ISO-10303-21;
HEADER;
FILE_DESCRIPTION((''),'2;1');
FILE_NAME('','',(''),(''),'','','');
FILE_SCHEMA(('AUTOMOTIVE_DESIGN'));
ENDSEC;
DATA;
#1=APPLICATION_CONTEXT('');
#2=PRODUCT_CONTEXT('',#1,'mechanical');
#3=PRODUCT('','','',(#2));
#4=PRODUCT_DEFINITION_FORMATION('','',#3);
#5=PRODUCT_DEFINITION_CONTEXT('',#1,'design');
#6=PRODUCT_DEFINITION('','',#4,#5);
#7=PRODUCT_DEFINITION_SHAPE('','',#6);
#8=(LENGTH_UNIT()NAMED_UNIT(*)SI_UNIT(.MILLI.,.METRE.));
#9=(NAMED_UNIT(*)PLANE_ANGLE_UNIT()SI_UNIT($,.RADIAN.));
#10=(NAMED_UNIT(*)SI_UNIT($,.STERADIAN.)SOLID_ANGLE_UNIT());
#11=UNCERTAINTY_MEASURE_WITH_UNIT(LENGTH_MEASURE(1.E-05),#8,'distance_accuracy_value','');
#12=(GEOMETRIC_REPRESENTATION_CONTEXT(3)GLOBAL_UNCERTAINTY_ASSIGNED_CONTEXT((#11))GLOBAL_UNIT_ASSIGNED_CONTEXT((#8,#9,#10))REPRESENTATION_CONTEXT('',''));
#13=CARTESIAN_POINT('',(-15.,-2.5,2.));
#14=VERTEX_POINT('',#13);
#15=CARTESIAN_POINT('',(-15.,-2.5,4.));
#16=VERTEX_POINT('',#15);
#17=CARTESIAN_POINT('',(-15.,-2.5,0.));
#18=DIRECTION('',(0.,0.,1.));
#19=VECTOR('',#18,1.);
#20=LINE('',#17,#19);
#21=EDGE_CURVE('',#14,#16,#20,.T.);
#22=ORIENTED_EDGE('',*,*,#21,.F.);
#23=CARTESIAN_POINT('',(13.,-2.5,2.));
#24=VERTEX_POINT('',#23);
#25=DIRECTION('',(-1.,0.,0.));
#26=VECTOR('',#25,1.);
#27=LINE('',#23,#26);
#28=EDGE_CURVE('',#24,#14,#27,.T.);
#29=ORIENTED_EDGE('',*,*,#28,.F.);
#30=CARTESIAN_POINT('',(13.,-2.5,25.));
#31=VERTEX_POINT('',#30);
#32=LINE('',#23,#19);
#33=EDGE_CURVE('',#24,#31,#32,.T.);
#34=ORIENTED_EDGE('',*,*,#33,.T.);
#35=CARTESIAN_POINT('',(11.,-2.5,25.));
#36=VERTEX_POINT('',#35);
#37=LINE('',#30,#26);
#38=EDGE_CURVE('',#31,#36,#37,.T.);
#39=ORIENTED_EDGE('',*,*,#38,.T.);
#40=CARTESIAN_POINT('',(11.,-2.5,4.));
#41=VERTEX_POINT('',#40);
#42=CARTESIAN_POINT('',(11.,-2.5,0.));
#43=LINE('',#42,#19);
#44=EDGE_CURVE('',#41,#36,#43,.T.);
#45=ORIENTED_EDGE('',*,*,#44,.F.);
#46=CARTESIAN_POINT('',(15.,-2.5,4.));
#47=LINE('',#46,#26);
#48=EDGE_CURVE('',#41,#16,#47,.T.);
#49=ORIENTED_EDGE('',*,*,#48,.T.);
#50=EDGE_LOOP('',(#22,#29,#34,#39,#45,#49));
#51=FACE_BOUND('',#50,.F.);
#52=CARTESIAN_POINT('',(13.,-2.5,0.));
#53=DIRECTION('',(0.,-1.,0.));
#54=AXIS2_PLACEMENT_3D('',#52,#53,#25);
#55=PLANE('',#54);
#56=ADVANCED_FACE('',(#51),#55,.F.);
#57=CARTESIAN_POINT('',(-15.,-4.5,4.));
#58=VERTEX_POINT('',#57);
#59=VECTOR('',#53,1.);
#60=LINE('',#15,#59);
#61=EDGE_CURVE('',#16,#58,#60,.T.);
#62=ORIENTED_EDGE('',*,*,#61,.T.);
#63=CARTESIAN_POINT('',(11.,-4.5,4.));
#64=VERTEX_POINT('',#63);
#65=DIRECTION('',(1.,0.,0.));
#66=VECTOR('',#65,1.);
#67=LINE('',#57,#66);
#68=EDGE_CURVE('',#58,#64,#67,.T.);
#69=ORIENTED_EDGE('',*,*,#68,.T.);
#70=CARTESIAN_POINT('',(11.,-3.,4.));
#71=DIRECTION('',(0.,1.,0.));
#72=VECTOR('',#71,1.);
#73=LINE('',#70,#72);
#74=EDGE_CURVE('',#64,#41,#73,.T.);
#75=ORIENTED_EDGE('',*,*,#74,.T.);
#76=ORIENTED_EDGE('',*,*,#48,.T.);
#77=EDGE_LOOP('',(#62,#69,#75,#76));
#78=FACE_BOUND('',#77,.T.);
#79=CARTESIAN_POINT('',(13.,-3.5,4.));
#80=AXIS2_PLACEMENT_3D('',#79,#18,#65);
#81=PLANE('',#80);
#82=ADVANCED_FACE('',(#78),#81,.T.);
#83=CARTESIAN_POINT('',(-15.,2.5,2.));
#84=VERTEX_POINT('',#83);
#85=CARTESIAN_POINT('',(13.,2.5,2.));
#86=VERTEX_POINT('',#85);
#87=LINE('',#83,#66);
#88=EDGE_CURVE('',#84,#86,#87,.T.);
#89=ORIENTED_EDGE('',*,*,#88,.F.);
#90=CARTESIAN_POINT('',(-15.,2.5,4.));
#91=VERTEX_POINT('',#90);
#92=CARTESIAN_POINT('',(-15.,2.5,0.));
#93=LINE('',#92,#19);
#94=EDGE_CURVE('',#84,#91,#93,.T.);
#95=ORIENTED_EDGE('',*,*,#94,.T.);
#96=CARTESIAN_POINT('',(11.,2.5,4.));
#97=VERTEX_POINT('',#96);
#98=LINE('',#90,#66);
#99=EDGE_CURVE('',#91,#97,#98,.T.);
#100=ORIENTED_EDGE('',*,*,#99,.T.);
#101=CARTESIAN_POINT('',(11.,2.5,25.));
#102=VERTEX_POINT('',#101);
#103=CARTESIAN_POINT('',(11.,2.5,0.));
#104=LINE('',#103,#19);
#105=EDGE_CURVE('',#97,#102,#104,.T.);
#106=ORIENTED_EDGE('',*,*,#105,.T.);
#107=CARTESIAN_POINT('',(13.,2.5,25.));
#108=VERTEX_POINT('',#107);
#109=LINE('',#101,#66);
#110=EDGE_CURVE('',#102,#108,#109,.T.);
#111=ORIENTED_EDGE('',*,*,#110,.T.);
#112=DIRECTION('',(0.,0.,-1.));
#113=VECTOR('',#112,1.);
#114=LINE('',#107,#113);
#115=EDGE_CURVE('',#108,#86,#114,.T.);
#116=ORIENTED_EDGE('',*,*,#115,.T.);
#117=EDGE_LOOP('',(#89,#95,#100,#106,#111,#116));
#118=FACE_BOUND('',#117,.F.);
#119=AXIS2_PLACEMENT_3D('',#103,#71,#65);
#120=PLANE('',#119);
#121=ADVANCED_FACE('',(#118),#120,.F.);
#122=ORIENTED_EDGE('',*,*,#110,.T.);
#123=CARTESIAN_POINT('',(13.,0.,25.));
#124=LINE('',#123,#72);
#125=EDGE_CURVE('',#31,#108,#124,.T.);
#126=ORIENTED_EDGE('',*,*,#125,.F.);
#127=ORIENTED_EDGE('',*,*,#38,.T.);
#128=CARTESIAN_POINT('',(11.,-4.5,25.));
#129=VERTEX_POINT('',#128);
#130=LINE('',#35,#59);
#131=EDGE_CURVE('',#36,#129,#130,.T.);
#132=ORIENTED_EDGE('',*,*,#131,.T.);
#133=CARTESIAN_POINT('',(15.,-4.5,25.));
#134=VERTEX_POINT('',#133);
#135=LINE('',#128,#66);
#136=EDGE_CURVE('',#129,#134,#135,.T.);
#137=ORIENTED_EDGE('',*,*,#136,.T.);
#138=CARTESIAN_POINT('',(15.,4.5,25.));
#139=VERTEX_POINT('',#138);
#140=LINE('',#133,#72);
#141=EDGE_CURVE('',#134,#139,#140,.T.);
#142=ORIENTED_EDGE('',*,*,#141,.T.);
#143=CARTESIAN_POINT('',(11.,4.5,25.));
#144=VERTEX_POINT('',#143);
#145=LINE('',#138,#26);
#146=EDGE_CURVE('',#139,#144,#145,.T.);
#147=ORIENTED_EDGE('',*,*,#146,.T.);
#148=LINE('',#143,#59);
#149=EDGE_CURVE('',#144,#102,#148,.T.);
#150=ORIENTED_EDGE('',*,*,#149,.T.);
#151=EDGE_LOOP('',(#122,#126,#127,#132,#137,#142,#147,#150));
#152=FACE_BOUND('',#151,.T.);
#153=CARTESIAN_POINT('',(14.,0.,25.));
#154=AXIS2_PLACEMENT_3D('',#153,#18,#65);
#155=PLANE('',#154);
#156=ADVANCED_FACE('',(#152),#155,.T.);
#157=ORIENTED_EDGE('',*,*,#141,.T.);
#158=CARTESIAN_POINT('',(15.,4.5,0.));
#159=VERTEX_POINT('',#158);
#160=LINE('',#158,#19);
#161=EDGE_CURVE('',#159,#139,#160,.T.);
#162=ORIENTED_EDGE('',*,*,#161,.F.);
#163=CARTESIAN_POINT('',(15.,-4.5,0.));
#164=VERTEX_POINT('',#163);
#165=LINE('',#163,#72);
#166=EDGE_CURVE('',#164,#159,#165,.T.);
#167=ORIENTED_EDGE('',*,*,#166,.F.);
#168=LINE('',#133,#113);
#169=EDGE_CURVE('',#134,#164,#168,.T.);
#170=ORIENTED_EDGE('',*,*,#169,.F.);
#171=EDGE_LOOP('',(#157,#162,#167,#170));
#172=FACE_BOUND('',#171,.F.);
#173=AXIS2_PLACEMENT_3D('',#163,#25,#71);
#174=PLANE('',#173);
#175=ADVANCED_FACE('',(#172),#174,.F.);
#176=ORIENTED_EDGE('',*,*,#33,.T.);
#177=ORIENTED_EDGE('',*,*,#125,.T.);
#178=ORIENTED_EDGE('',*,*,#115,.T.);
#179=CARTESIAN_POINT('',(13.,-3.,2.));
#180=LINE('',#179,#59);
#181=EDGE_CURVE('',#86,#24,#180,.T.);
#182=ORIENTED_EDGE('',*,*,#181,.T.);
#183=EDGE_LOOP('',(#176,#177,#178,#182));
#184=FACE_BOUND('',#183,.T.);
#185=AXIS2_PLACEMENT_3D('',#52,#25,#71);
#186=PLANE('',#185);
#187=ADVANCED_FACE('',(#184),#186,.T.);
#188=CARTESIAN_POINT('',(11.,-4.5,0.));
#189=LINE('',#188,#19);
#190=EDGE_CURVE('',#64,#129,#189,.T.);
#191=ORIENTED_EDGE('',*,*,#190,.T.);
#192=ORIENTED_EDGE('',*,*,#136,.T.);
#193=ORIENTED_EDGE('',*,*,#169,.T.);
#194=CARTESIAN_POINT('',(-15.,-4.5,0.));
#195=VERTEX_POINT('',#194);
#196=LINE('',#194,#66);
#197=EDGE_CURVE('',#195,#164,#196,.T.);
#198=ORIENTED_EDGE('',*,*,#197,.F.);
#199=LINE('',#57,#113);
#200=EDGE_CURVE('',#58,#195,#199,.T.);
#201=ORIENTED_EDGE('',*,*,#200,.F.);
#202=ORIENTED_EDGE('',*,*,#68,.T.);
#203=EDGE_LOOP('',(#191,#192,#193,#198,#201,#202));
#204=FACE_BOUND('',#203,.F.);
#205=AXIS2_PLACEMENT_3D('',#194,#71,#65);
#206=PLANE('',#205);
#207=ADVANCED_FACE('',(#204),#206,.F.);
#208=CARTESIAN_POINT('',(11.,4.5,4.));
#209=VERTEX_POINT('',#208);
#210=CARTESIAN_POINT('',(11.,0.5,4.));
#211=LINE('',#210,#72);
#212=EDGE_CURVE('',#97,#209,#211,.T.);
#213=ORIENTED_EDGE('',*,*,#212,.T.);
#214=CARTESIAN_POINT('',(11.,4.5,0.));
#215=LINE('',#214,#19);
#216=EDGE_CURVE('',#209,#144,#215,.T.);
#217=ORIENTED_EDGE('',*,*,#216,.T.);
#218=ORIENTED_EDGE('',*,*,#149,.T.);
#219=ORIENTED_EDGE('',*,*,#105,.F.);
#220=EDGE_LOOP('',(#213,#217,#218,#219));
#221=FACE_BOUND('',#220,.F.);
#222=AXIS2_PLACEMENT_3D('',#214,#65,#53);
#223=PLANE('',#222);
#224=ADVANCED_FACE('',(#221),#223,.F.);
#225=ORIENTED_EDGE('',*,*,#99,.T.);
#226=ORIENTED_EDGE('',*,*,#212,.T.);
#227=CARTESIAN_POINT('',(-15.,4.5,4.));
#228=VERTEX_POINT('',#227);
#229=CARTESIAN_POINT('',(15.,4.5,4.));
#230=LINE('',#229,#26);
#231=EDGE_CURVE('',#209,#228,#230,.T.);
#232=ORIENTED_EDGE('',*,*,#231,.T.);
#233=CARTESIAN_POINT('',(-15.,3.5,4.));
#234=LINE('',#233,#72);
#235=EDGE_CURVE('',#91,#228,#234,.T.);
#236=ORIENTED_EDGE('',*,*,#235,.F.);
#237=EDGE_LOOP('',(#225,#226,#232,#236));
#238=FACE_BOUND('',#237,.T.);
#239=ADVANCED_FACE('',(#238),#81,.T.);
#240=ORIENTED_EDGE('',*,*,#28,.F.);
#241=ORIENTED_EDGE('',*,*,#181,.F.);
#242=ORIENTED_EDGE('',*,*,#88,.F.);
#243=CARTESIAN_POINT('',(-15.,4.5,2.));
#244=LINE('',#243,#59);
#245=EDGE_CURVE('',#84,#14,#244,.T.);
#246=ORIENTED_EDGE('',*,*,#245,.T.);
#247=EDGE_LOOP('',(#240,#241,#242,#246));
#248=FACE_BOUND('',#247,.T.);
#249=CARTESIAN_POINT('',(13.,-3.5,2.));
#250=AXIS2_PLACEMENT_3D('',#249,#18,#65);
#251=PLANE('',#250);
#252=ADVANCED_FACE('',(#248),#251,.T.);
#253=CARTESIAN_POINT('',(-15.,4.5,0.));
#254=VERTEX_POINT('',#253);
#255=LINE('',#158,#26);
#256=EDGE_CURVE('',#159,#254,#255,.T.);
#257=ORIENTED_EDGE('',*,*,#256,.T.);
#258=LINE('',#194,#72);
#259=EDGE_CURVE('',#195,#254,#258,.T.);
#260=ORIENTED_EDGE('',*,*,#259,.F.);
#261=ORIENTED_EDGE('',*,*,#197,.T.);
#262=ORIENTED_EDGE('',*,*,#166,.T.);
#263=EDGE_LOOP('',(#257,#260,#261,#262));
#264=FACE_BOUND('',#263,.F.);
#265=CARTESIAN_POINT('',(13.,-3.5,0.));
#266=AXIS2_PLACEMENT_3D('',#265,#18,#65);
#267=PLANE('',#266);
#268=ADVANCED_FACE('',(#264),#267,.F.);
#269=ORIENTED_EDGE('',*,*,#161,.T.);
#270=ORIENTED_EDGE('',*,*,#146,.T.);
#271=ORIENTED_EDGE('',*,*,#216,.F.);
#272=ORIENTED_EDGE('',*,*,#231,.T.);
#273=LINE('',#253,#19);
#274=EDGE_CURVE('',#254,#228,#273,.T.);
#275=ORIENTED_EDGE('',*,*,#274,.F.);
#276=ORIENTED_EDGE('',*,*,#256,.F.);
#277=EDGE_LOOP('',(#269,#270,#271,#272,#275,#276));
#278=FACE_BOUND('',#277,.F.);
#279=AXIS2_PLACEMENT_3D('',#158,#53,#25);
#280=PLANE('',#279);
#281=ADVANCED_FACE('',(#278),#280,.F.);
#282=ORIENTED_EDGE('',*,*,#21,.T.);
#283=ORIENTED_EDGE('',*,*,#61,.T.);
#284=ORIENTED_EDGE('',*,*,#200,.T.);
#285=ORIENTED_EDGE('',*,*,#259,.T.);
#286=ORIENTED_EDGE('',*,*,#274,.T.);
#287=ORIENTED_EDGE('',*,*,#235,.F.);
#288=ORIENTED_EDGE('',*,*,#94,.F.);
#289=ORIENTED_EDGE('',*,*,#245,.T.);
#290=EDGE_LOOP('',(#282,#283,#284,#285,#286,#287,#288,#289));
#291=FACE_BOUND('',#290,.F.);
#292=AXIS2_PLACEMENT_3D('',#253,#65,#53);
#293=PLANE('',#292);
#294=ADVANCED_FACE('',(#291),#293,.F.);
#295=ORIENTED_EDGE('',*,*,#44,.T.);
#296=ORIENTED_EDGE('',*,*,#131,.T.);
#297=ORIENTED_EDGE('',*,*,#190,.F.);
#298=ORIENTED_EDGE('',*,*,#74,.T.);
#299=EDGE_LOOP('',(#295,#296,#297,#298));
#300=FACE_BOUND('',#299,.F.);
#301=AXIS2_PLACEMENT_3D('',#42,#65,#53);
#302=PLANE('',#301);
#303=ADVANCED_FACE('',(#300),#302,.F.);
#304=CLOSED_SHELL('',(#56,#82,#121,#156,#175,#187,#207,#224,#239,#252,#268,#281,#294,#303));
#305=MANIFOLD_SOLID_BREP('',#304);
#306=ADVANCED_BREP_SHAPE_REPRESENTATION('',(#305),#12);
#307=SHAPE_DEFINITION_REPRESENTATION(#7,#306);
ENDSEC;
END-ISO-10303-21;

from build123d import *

# Parameters (mm, degrees)
F0_W     = 2
F0_H     = 5
F0_W_2   = 26
F0_H_2   = 2
F1_DEPTH = 2
F2_DEPTH = 4
F3_DEPTH = 25


with BuildPart() as f1:
    # F0 (on Top) → F1 (new body)
    with BuildSketch(Plane.XY):
        Polygon((11, -4.5), (15, -4.5), (15, -2.5), (13, -2.5), (11, -2.5), align=None)
        Polygon((-15, -4.5), (11, -4.5), (11, -2.5), (-13.6096680164, -2.5), (-15, -2.5), align=None)
        with Locations((14, 0)):
            Rectangle(F0_W, F0_H)
        with Locations((12, 0)):
            Rectangle(F0_W, F0_H)
        Polygon((-13.6096680164, -2.5), (11, -2.5), (11, 2.5), (-15, 2.5), (-15, -2.5), align=None)
        Polygon((13, 2.5), (15, 2.5), (15, 4.5), (11, 4.5), (11, 2.5), align=None)
        with Locations((-2, 3.5)):
            Rectangle(F0_W_2, F0_H_2)
    extrude(amount=F1_DEPTH)

    # F0 (on Top) → F2 (join)
    with BuildSketch(Plane.XY):
        Polygon((11, -4.5), (15, -4.5), (15, -2.5), (13, -2.5), (11, -2.5), align=None)
        Polygon((-15, -4.5), (11, -4.5), (11, -2.5), (-13.6096680164, -2.5), (-15, -2.5), align=None)
        with Locations((14, 0)):
            Rectangle(F0_W, F0_H)
        Polygon((13, 2.5), (15, 2.5), (15, 4.5), (11, 4.5), (11, 2.5), align=None)
        with Locations((-2, 3.5)):
            Rectangle(F0_W_2, F0_H_2)
    extrude(amount=F2_DEPTH)

    # F0 (on Top) → F3 (join)
    with BuildSketch(Plane.XY):
        with Locations((14, 0)):
            Rectangle(F0_W, F0_H)
        Polygon((11, -4.5), (15, -4.5), (15, -2.5), (13, -2.5), (11, -2.5), align=None)
        Polygon((13, 2.5), (15, 2.5), (15, 4.5), (11, 4.5), (11, 2.5), align=None)
    extrude(amount=F3_DEPTH)


solid = f1.part
